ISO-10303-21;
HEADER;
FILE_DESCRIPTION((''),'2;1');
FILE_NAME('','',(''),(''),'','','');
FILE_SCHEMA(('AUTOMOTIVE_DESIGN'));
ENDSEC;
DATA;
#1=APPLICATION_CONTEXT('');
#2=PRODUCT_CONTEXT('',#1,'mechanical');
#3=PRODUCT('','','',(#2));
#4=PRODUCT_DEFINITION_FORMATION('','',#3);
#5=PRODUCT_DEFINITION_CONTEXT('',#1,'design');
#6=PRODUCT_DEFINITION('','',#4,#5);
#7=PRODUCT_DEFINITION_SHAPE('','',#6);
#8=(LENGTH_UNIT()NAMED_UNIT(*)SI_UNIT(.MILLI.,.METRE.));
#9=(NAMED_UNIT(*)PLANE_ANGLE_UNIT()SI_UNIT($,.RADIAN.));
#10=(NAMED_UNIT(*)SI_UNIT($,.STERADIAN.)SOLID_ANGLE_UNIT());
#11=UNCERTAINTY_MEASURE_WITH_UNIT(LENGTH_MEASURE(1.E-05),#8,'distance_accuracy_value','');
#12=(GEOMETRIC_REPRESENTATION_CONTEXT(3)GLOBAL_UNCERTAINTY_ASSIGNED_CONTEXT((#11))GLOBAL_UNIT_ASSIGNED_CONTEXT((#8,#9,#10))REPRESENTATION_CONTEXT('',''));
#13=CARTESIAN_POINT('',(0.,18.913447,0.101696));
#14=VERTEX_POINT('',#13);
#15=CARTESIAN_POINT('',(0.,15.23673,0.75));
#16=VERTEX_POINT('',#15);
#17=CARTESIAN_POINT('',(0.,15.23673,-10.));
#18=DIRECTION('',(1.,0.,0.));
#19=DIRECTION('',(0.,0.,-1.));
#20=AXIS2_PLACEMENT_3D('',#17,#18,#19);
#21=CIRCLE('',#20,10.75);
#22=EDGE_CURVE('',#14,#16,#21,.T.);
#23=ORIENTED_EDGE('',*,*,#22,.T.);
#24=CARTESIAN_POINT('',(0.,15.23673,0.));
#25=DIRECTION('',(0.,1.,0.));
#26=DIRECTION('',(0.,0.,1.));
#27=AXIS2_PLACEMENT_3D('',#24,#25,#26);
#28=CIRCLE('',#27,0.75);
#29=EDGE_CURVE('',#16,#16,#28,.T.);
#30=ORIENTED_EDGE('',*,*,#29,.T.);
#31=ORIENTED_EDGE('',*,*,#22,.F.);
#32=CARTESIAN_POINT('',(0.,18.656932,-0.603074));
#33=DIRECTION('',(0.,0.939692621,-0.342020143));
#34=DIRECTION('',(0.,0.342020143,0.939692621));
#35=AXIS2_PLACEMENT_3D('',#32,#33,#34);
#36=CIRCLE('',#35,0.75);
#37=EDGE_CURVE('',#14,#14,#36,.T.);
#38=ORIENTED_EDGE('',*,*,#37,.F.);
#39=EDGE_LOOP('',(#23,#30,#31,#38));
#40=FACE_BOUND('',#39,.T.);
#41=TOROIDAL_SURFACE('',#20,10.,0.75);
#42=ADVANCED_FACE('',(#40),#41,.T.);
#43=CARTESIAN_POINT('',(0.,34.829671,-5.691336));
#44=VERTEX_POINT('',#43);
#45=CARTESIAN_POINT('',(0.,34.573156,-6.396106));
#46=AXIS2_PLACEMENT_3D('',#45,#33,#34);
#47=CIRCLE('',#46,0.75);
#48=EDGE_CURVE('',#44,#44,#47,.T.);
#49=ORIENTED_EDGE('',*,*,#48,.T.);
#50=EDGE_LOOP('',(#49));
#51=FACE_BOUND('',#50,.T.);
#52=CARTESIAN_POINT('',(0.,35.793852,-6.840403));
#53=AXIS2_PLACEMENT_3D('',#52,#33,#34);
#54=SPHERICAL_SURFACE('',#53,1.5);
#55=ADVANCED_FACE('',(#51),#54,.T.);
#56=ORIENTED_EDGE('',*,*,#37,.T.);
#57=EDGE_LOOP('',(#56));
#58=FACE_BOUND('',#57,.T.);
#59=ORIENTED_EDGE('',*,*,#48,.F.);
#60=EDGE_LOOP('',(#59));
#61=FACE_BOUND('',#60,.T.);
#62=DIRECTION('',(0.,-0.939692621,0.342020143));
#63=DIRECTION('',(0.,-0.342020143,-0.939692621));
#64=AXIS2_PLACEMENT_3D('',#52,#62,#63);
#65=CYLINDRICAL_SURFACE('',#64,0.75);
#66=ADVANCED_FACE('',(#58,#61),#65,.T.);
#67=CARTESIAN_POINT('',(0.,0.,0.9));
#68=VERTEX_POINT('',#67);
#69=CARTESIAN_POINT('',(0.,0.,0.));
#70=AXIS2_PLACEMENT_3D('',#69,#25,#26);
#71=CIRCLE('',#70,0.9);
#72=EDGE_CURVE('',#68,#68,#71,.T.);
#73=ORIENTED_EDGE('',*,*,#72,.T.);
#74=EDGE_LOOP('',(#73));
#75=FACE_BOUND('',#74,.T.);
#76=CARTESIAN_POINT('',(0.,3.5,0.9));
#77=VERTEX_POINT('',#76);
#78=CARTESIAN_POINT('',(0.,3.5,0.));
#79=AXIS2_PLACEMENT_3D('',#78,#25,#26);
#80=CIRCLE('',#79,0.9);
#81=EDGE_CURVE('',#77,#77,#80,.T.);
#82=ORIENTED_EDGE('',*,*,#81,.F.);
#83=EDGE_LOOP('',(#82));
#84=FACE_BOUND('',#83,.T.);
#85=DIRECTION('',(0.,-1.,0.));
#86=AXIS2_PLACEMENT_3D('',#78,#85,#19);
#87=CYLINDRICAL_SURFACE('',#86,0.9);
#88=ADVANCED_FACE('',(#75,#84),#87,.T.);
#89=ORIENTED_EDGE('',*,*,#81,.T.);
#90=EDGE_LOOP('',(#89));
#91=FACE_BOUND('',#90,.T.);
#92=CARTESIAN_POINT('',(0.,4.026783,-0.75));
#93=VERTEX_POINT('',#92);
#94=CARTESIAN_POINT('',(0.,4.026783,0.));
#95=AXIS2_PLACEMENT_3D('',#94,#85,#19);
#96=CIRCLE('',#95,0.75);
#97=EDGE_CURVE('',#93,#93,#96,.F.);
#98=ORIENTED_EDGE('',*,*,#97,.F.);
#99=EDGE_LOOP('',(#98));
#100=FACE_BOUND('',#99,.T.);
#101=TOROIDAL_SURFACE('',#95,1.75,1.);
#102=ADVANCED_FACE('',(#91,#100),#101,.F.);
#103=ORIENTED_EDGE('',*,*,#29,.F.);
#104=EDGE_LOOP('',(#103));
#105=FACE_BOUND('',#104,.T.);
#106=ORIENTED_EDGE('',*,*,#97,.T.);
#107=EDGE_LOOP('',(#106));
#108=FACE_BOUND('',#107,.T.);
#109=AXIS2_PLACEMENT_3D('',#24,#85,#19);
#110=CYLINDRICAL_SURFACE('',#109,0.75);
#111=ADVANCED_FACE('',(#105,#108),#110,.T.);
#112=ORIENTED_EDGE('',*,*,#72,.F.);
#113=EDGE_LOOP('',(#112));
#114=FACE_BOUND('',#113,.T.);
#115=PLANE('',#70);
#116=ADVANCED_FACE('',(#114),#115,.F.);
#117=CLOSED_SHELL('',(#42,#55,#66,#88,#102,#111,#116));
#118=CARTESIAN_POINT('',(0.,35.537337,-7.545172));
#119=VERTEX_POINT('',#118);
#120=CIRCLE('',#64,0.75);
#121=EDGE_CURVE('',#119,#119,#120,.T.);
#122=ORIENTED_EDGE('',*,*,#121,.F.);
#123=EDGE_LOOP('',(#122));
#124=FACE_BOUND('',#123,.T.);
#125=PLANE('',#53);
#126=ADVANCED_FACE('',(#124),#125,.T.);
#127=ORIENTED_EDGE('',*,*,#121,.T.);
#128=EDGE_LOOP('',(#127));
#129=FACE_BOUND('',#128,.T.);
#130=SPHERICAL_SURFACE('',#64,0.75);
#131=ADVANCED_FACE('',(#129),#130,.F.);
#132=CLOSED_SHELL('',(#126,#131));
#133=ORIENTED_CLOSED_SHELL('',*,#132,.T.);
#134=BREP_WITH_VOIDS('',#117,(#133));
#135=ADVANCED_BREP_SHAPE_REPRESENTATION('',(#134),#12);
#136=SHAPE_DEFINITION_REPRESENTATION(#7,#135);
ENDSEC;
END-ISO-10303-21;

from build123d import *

# Parameters (mm, degrees)
SKETCH_1_R        = 0.9
EXTRUDE_1_DEPTH   = 3.5
SWEEP_1_PROFILE_R = 0.75
FILLET_2_R        = 1


with BuildPart() as part:
    # 草图1 → 凸台-拉伸1 (new body)
    with BuildSketch(Plane(origin=(0, 0, 0), x_dir=(1, 0, 0), z_dir=(0, 1, 0))):
        with Locations(Location((0, 0, 0), (0, 0, 270))):
            Circle(SKETCH_1_R)
    extrude(amount=EXTRUDE_1_DEPTH)

    # 扫描1: sweep along a path in 草图2
    with BuildLine(Plane(origin=(0, 0, 0), x_dir=(0, 0, -1), z_dir=(1, 0, 0))) as sweep_1_path:
        Line((6.840402867, 35.793852416), (0.603073792, 18.656931626))
        ThreePointArc((0.603073792, 18.656931626), (0.15192247, 16.97321197), (0, 15.236730193))
        Line((0, 15.236730193), (0, 3))
    # 扫描1 profile (on start of the path) → 扫描1 (sweep)
    with BuildSketch(Plane(origin=(0, 35.793852416, -6.840402867), x_dir=(0, -0.34202014332566616, -0.9396926207859094), z_dir=(0, -0.9396926207859094, 0.34202014332566616))):
        Circle(SWEEP_1_PROFILE_R)
    sweep(path=sweep_1_path.line)

    # 草图20 one side → 旋转7 (revolve)
    with BuildSketch(Plane(origin=(0, 33.805230182, -12.304097549), x_dir=(1, 0, 0), z_dir=(0, 0.9396926207859094, -0.3420201433256662))):
        with BuildLine():
            ThreePointArc((-1.5, -5.814342437), (0, -7.314342437), (1.5, -5.814342437))
            Line((1.5, -5.814342437), (0.75, -5.814342437))
            ThreePointArc((0.75, -5.814342437), (0, -6.564342437), (-0.75, -5.814342437))
            Line((-0.75, -5.814342437), (-1.5, -5.814342437))
        make_face()
    revolve(axis=Axis((0, 35.793852416, -6.840402867), (-1, 0, 0)))

    # 圆角2
    # the kernel refuses this fillet: 1 mm, written as the material it adds along each edge
    with BuildSketch(Plane(origin=(0, 3.5, 0), x_dir=(0, 0, -1), z_dir=(-1, 0, 0))) as fillet_2_piece_1:
        with BuildLine():
            CenterArc((1.75, -0.526782688), FILLET_2_R, 148.211669382, 31.788330618)
            Line((0.75, -0.526782688), (0.73, -0.526782688))
            Line((0.73, -0.526782688), (0.73, 0))
            Line((0.73, 0), (0.75, 0.02))
            ThreePointArc((0.75, 0.02), (0.825, 0.02), (0.883, 0.010535654))
            Line((0.883, 0.010535654), (0.9, 0))
        make_face()
    revolve(axis=Axis((0, 3.5, 0), (0, -1, 0)))


solid = part.part
